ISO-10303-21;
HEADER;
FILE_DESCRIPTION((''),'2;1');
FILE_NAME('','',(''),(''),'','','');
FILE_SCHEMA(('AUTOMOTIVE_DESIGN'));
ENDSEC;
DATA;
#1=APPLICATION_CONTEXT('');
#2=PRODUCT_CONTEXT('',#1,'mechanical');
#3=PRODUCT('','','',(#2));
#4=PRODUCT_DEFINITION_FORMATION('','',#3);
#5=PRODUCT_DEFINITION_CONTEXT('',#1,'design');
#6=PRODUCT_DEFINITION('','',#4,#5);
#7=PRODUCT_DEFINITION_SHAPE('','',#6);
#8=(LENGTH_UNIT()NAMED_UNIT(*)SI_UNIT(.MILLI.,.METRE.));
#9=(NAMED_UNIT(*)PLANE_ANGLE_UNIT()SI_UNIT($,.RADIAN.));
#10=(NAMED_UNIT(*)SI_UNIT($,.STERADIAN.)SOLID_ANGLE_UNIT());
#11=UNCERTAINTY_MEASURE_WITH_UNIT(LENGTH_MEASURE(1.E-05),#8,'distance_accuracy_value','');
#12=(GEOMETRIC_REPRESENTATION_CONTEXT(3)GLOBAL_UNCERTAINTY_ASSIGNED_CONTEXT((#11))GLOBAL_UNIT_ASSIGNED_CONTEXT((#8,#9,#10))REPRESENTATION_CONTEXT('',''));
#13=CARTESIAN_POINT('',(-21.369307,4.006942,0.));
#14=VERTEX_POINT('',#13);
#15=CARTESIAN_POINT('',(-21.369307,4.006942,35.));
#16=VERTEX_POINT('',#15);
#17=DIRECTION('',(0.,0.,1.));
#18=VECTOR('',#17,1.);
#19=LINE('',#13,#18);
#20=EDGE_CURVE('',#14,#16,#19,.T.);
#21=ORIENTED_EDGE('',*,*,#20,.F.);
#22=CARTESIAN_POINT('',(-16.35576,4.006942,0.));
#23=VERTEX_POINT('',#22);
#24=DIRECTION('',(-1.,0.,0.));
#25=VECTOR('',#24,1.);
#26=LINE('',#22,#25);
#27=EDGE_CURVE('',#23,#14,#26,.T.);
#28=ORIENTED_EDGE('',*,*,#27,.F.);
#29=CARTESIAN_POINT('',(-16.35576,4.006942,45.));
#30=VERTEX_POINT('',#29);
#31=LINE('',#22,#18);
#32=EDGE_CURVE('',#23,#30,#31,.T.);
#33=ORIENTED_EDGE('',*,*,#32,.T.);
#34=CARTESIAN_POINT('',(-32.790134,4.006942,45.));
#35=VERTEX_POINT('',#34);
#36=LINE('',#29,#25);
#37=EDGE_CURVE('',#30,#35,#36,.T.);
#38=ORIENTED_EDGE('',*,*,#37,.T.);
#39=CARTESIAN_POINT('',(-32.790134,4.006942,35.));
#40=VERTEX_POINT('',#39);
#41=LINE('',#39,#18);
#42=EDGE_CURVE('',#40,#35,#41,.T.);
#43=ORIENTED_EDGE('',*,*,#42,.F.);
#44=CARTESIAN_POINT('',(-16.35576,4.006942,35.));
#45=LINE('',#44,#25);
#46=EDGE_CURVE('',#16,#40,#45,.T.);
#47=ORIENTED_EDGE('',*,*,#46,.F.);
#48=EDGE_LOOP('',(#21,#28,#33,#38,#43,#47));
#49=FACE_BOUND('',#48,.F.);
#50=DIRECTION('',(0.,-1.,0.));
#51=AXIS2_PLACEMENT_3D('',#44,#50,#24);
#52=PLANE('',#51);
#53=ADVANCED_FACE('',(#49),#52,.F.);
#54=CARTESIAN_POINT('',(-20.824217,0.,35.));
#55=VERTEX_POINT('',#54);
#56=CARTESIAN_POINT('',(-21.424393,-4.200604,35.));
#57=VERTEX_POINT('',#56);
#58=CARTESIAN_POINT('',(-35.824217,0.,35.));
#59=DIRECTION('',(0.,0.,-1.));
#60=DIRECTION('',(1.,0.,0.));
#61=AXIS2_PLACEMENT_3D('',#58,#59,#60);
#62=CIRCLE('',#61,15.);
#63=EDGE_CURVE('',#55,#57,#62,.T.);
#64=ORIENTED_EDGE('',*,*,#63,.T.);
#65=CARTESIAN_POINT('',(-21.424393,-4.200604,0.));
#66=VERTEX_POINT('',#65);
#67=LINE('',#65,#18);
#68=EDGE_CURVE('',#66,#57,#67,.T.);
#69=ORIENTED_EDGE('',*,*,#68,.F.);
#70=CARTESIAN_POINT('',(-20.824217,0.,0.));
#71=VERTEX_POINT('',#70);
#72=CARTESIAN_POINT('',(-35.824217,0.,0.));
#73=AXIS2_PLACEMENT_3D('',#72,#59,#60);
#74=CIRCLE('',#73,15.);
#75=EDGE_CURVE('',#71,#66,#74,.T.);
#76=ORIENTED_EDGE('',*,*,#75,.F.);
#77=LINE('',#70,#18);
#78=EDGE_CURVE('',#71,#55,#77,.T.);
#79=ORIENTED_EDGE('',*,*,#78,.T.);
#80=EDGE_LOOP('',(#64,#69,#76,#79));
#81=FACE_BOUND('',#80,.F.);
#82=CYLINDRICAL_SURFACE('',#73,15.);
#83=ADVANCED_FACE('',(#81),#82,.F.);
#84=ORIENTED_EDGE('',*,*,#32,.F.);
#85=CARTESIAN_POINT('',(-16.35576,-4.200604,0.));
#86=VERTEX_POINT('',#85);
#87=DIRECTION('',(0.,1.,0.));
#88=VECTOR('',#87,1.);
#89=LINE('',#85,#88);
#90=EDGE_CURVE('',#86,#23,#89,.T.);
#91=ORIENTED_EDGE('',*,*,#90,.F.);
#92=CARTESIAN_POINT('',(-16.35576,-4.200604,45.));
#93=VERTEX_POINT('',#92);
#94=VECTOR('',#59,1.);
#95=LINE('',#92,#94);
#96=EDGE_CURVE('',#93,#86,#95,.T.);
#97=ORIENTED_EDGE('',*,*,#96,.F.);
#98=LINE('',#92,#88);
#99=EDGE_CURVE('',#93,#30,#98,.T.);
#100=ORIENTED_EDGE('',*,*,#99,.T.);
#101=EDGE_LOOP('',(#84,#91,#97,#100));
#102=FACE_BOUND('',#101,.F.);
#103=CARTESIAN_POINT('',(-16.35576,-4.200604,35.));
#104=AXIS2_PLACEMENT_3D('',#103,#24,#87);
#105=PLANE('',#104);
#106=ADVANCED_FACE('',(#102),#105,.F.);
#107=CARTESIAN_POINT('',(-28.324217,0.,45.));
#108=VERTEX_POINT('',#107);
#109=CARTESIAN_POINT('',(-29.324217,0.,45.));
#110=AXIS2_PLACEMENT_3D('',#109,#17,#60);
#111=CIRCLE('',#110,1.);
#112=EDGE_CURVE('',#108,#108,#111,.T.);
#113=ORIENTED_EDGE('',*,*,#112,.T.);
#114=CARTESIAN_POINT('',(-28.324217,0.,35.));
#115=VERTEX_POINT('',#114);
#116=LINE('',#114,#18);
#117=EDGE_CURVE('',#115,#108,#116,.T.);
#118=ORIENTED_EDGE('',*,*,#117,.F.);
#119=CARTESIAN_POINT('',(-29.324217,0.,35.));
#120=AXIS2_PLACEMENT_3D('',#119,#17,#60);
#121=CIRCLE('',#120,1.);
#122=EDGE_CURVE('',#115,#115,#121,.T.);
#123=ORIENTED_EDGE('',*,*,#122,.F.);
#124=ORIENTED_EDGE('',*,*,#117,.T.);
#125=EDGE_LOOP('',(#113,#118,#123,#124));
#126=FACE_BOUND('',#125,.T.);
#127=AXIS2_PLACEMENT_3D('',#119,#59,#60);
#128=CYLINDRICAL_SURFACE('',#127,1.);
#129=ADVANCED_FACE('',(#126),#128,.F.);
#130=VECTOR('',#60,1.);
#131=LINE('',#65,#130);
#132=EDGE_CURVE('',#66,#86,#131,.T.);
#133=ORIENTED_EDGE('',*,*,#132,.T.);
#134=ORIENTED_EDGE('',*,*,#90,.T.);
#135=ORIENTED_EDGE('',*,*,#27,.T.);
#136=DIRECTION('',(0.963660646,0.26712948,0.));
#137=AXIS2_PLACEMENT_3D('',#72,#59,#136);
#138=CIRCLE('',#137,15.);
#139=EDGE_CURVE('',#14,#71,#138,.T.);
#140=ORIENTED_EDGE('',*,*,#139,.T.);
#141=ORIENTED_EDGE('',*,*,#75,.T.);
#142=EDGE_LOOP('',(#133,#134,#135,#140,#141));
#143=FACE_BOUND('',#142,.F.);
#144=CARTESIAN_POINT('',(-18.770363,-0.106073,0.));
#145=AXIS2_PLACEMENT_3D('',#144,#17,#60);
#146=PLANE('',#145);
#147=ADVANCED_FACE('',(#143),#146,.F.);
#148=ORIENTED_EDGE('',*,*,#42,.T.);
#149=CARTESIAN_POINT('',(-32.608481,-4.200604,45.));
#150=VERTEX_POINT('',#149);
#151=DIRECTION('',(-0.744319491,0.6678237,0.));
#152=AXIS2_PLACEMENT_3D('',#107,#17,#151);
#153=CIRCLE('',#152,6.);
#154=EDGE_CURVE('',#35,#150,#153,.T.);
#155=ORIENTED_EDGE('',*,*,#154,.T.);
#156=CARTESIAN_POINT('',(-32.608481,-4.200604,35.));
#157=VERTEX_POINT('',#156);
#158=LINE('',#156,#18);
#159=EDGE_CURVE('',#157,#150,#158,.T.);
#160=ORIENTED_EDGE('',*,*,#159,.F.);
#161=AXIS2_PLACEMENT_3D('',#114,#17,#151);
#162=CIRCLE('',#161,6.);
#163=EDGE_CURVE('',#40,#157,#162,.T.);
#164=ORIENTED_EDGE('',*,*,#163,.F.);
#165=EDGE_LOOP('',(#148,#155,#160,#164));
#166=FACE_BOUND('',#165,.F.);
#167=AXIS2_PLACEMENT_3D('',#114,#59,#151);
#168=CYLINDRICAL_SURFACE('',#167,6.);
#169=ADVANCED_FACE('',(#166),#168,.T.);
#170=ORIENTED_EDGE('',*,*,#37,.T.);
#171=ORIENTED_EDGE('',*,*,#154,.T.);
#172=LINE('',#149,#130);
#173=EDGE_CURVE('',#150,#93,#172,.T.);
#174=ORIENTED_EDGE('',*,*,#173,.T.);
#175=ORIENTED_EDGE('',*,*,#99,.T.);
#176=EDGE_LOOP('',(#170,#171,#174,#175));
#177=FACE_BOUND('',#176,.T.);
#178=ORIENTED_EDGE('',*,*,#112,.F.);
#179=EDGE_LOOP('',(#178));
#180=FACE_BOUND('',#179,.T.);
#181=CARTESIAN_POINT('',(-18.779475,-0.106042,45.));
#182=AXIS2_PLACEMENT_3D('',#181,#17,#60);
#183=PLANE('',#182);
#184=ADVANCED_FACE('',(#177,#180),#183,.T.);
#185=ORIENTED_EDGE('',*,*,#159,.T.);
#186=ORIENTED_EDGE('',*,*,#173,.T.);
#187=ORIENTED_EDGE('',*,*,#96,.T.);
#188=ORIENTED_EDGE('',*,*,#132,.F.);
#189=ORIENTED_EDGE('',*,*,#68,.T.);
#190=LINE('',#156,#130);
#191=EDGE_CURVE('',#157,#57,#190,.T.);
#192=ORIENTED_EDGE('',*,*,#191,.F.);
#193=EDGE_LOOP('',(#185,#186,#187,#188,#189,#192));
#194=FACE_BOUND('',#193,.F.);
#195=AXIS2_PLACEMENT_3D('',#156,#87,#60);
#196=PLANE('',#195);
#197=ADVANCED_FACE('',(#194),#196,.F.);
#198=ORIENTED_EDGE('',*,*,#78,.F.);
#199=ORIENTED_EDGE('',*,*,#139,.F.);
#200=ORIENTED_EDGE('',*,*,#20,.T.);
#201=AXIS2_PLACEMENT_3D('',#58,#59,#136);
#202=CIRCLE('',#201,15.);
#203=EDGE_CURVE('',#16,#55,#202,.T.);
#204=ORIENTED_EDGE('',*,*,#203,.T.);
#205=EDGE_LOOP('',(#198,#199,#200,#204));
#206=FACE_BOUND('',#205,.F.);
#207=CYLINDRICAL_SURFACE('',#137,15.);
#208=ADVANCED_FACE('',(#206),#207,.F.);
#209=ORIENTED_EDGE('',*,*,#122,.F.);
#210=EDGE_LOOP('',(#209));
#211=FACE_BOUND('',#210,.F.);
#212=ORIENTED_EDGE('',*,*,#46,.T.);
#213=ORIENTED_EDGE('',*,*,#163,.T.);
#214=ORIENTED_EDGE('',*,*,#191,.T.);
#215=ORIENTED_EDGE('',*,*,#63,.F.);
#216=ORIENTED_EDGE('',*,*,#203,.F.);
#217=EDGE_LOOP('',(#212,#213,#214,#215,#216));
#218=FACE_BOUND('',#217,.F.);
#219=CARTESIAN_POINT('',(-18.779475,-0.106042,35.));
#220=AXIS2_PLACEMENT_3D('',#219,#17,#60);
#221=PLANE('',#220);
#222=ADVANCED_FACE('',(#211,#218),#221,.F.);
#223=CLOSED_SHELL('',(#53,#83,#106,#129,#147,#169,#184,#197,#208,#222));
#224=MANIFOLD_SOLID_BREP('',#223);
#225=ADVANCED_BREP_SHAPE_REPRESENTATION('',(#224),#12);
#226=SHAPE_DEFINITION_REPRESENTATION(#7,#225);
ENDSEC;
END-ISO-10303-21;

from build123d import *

# Parameters (mm, degrees)
F1_DEPTH = 35
F2_R     = 1
F3_DEPTH = 10


# Not quite as in the source:
# - a feature names something its author has since deleted; it is built from what else it names


with BuildPart() as f1:
    # F0 (on Top) → F1 (new body)
    with BuildSketch(Plane.XY):
        with BuildLine():
            ThreePointArc((-21.369307128, 4.0069422022), (-20.961114092, 2.0219241613), (-20.8242168194, 0))
            ThreePointArc((-20.8242168194, 0), (-20.9750189274, -2.1216319103), (-21.4243930811, -4.2006042786))
            Line((-21.4243930811, -4.2006042786), (-16.3557600736, -4.2006042786))
            Line((-16.3557600736, -4.2006042786), (-16.3557600736, 4.0069422022))
            Line((-16.3557600736, 4.0069422022), (-21.369307128, 4.0069422022))
        make_face()
    extrude(amount=F1_DEPTH)

    # F2 (on face) → F3 (join)
    with BuildSketch(Plane.XY.offset(35)):
        with BuildLine():
            Line((-16.3557600736, -4.2006042786), (-16.3557600736, 4.0069422022))
            Line((-16.3557600736, 4.0069422022), (-21.369307128, 4.0069422022))
            ThreePointArc((-21.369307128, 4.0069422022), (-20.8245546521, -0.1006720692), (-21.4243930811, -4.2006042786))
            Line((-21.4243930811, -4.2006042786), (-16.3557600736, -4.2006042786))
        make_face()
        with BuildLine():
            ThreePointArc((-21.4243930811, -4.2006042786), (-20.8245546521, -0.1006720692), (-21.369307128, 4.0069422022))
            Line((-21.369307128, 4.0069422022), (-32.7901337676, 4.0069422022))
            ThreePointArc((-32.7901337676, 4.0069422022), (-34.3227478364, -0.1327615841), (-32.6084814815, -4.2006042786))
            Line((-32.6084814815, -4.2006042786), (-21.4243930811, -4.2006042786))
        make_face()
        with Locations((-29.3242168194, 0)):
            Circle(F2_R, mode=Mode.SUBTRACT)
    extrude(amount=F3_DEPTH)


solid = f1.part
